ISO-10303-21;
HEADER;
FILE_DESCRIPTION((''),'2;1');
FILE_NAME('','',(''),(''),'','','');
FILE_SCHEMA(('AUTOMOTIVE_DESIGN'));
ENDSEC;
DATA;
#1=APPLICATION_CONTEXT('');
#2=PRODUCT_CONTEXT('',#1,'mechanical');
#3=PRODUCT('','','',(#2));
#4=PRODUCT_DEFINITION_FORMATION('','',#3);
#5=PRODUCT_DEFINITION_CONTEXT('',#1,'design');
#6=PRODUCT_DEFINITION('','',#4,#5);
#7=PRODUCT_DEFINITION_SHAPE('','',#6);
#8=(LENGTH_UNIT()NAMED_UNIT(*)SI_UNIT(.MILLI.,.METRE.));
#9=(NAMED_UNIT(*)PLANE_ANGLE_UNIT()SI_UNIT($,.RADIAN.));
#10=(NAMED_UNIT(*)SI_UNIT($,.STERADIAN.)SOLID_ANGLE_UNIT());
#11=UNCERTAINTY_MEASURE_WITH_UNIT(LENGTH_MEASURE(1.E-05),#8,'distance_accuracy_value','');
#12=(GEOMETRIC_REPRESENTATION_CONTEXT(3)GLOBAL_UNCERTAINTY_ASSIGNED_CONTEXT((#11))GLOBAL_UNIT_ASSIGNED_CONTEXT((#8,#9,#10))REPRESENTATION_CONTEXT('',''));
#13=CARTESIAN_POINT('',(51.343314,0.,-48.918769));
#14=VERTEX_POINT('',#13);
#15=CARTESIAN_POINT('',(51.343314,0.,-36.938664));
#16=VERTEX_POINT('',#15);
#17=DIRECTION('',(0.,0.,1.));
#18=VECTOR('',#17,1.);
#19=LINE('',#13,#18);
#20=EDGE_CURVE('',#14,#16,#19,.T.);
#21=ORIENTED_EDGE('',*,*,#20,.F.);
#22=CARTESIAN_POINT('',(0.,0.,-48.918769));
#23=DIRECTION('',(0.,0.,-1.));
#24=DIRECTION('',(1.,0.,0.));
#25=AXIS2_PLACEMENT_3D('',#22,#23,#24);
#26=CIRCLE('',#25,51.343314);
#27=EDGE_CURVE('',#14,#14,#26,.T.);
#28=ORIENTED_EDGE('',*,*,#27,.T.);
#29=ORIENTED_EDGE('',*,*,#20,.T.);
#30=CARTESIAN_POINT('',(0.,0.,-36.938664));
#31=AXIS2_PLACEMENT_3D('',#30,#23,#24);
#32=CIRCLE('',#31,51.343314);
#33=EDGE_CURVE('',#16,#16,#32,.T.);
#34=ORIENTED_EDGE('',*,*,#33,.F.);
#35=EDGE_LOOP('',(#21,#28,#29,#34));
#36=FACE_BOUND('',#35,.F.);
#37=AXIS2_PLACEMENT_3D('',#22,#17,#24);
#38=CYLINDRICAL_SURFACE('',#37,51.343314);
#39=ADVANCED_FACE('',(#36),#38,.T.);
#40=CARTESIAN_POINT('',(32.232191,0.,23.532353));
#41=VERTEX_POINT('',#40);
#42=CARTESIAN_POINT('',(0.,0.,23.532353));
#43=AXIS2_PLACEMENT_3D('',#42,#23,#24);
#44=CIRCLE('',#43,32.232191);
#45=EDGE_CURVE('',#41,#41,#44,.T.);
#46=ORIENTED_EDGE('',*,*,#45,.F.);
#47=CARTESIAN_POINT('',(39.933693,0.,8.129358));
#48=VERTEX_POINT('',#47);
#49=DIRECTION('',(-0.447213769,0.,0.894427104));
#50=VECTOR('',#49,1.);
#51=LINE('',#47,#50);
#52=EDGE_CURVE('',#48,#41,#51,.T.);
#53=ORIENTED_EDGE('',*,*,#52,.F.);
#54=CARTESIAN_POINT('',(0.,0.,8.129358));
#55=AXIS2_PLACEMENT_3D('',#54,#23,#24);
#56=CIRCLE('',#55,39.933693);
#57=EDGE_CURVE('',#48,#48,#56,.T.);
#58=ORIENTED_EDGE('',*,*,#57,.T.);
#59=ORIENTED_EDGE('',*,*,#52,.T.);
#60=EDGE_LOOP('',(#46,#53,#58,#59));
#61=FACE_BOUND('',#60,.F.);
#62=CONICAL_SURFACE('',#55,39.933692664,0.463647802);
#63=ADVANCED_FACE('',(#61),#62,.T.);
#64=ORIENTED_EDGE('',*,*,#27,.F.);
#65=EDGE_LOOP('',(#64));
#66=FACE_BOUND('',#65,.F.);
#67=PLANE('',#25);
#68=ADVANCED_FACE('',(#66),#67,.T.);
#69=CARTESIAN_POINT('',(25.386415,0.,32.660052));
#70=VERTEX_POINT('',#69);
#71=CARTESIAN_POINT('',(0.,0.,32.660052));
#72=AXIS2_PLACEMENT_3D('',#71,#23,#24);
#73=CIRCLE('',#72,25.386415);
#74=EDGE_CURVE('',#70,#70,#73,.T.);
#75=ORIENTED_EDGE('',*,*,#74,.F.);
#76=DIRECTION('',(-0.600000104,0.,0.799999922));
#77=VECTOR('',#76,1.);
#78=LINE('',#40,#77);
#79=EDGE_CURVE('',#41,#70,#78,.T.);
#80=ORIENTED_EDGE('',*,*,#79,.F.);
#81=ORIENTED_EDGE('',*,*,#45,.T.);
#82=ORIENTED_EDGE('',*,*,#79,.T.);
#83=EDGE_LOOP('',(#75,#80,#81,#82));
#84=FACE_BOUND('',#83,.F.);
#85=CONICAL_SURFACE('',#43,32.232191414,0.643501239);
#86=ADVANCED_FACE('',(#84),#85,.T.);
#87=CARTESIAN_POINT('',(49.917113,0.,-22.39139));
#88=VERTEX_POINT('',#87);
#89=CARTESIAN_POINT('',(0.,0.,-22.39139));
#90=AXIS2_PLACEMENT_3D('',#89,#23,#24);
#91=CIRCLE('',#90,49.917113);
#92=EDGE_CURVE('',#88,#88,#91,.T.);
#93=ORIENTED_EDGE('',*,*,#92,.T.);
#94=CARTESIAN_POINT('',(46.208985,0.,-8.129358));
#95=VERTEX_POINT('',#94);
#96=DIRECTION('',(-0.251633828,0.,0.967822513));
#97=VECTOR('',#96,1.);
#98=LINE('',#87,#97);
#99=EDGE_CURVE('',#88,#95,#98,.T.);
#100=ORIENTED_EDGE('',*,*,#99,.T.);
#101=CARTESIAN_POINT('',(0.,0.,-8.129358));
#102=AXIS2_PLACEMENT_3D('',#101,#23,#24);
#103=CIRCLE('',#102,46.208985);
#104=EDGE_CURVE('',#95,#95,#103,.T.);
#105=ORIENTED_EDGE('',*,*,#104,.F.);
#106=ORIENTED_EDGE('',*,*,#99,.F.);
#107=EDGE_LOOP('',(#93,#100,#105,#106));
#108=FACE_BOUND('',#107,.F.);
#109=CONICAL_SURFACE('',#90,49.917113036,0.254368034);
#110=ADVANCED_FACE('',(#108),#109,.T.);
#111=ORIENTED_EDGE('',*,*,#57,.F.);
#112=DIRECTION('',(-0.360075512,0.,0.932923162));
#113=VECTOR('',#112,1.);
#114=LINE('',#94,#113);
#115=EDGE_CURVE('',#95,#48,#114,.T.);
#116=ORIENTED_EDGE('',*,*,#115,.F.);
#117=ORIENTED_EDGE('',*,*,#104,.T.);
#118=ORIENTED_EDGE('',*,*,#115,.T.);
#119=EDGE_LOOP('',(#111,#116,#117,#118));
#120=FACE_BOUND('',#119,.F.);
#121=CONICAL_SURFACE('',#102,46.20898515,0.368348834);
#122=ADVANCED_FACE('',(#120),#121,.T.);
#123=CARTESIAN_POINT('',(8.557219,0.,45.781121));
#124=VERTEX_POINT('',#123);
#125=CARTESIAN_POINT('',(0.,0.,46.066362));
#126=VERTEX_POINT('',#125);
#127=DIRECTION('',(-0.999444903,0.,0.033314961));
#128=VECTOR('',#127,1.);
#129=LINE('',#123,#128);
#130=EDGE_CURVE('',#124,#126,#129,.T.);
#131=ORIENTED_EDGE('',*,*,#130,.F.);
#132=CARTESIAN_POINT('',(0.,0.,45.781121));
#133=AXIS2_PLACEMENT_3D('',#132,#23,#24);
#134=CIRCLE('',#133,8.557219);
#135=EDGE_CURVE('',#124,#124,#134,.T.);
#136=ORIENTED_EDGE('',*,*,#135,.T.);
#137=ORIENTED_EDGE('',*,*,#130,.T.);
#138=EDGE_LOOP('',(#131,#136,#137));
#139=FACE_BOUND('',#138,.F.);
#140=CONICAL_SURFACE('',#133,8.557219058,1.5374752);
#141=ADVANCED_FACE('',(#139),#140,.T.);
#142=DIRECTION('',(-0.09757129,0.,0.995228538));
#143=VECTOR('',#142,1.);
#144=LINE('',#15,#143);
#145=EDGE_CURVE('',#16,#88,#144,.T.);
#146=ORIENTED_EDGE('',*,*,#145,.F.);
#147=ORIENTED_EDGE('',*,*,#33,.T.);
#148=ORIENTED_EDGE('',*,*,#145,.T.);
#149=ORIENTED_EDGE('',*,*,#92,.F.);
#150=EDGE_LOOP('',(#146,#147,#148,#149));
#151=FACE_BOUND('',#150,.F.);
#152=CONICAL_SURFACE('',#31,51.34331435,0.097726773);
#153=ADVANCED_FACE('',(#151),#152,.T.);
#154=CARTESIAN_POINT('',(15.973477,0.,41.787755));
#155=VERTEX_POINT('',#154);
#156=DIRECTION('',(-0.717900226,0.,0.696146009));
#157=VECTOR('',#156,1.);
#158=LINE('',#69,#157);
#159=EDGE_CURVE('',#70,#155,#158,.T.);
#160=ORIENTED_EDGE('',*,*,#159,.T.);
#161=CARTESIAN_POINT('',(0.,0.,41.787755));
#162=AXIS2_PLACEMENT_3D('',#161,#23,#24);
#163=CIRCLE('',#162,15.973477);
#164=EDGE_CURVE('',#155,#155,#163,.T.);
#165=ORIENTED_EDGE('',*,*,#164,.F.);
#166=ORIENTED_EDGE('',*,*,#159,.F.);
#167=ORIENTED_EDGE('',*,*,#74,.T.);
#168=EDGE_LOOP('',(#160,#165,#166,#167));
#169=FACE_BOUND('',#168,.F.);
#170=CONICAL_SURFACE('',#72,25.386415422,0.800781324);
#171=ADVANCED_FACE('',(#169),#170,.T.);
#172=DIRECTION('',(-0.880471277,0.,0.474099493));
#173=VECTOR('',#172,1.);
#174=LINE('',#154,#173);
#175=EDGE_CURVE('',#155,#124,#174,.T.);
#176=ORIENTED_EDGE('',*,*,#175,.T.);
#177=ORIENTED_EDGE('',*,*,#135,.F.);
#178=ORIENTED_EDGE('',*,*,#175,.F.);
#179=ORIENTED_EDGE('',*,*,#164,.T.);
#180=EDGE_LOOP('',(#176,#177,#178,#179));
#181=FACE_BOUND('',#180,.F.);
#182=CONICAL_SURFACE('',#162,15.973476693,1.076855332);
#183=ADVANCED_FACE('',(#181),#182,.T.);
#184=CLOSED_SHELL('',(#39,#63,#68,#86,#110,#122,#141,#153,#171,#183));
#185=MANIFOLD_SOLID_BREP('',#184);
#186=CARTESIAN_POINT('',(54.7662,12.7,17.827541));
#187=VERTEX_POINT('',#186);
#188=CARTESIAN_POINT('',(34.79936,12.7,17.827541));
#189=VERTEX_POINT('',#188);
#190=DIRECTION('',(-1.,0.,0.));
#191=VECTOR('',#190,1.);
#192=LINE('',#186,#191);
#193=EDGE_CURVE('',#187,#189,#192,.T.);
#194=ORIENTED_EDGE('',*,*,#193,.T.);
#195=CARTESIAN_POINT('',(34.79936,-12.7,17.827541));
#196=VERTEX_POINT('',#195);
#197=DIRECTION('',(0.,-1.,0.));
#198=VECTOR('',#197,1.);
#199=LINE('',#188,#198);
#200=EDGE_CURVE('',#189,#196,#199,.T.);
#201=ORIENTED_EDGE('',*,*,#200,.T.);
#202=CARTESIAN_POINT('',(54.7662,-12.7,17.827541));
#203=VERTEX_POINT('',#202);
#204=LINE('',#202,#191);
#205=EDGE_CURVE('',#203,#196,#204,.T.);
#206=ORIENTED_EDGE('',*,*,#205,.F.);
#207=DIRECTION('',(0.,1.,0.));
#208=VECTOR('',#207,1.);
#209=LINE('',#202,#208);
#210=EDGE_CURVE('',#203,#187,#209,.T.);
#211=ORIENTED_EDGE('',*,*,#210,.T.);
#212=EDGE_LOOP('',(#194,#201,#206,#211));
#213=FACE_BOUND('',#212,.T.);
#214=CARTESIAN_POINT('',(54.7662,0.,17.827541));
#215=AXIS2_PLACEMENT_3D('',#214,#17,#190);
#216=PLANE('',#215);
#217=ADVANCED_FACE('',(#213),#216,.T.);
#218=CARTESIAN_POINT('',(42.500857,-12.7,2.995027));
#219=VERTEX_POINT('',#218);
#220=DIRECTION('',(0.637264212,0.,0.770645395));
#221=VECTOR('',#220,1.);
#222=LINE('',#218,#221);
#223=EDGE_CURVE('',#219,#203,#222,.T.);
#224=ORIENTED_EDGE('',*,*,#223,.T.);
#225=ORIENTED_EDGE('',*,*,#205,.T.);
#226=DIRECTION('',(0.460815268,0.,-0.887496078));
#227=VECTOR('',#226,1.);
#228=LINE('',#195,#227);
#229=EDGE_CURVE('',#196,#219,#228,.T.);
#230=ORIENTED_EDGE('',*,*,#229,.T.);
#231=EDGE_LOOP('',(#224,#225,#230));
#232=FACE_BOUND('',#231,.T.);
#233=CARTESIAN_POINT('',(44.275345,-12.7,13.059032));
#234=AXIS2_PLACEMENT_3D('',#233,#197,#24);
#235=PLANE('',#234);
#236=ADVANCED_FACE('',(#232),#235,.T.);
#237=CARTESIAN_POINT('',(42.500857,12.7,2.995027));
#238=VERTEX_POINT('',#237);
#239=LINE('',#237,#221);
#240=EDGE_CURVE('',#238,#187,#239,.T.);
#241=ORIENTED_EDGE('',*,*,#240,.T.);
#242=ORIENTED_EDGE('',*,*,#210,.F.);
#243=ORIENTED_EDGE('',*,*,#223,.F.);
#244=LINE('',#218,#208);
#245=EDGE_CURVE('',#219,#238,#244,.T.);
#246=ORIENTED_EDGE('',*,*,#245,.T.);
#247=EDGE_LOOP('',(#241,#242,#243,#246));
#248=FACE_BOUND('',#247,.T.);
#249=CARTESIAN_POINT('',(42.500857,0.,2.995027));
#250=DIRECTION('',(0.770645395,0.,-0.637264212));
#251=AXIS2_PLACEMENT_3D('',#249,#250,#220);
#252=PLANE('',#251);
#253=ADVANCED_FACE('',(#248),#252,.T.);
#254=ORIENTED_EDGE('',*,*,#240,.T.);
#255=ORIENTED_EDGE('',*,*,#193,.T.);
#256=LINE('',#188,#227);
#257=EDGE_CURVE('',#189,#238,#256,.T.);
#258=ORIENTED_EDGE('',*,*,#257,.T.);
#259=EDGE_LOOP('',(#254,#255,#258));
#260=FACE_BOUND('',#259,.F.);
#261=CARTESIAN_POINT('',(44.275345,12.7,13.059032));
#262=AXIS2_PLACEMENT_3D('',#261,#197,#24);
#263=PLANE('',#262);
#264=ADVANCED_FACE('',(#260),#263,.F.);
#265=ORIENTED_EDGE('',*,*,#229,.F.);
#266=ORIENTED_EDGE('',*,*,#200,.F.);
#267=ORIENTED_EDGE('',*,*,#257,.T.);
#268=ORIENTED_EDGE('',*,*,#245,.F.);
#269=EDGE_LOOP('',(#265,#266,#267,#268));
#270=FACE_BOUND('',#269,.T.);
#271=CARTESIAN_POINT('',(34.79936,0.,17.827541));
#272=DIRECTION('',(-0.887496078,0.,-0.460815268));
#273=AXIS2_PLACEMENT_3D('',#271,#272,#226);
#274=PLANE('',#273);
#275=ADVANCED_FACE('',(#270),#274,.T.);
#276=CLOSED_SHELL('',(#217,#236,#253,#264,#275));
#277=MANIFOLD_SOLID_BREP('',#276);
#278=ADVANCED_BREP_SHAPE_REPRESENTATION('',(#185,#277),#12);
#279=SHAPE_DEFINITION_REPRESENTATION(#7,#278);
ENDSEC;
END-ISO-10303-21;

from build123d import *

# Parameters (mm, degrees)
F3_DEPTH = 12.7


# Not quite as in the source:
# - the program builds the solid bodies; features that only make, move or delete a surface that nothing else refers to are left out


with BuildPart() as f1:
    # F0 (on Front) → F1 (revolve)
    with BuildSketch(Plane.XZ):
        Polygon((8.5572190583, 45.7811206579), (0, 46.0663624108), (0, -48.9187687635), (51.3433143497, -48.9187687635), (51.3433143497, -36.9386635721), (49.9171130359, -22.3913900554), (46.2089851499, -8.1293582916), (39.9336926639, 8.1293582916), (32.2321914136, 23.5323533416), (25.386415422, 32.6600521803), (15.973476693, 41.7877547443), align=None)
    revolve(axis=Axis((0, 0, -1.4262031764), (0, 0, -1)))


with BuildPart() as f3:
    # F2 (on Front) → F3 (new body, symmetric)
    with BuildSketch(Plane.XZ):
        Polygon((54.7662004828, 17.8275406361), (34.7993597388, 17.8275406361), (42.5008572638, 2.9950267635), align=None)
    extrude(amount=F3_DEPTH, both=True)


with BuildPart() as f3_1:
    # F5: moved
    add(f3.part)


solid = Compound([f1.part, f3_1.part])
